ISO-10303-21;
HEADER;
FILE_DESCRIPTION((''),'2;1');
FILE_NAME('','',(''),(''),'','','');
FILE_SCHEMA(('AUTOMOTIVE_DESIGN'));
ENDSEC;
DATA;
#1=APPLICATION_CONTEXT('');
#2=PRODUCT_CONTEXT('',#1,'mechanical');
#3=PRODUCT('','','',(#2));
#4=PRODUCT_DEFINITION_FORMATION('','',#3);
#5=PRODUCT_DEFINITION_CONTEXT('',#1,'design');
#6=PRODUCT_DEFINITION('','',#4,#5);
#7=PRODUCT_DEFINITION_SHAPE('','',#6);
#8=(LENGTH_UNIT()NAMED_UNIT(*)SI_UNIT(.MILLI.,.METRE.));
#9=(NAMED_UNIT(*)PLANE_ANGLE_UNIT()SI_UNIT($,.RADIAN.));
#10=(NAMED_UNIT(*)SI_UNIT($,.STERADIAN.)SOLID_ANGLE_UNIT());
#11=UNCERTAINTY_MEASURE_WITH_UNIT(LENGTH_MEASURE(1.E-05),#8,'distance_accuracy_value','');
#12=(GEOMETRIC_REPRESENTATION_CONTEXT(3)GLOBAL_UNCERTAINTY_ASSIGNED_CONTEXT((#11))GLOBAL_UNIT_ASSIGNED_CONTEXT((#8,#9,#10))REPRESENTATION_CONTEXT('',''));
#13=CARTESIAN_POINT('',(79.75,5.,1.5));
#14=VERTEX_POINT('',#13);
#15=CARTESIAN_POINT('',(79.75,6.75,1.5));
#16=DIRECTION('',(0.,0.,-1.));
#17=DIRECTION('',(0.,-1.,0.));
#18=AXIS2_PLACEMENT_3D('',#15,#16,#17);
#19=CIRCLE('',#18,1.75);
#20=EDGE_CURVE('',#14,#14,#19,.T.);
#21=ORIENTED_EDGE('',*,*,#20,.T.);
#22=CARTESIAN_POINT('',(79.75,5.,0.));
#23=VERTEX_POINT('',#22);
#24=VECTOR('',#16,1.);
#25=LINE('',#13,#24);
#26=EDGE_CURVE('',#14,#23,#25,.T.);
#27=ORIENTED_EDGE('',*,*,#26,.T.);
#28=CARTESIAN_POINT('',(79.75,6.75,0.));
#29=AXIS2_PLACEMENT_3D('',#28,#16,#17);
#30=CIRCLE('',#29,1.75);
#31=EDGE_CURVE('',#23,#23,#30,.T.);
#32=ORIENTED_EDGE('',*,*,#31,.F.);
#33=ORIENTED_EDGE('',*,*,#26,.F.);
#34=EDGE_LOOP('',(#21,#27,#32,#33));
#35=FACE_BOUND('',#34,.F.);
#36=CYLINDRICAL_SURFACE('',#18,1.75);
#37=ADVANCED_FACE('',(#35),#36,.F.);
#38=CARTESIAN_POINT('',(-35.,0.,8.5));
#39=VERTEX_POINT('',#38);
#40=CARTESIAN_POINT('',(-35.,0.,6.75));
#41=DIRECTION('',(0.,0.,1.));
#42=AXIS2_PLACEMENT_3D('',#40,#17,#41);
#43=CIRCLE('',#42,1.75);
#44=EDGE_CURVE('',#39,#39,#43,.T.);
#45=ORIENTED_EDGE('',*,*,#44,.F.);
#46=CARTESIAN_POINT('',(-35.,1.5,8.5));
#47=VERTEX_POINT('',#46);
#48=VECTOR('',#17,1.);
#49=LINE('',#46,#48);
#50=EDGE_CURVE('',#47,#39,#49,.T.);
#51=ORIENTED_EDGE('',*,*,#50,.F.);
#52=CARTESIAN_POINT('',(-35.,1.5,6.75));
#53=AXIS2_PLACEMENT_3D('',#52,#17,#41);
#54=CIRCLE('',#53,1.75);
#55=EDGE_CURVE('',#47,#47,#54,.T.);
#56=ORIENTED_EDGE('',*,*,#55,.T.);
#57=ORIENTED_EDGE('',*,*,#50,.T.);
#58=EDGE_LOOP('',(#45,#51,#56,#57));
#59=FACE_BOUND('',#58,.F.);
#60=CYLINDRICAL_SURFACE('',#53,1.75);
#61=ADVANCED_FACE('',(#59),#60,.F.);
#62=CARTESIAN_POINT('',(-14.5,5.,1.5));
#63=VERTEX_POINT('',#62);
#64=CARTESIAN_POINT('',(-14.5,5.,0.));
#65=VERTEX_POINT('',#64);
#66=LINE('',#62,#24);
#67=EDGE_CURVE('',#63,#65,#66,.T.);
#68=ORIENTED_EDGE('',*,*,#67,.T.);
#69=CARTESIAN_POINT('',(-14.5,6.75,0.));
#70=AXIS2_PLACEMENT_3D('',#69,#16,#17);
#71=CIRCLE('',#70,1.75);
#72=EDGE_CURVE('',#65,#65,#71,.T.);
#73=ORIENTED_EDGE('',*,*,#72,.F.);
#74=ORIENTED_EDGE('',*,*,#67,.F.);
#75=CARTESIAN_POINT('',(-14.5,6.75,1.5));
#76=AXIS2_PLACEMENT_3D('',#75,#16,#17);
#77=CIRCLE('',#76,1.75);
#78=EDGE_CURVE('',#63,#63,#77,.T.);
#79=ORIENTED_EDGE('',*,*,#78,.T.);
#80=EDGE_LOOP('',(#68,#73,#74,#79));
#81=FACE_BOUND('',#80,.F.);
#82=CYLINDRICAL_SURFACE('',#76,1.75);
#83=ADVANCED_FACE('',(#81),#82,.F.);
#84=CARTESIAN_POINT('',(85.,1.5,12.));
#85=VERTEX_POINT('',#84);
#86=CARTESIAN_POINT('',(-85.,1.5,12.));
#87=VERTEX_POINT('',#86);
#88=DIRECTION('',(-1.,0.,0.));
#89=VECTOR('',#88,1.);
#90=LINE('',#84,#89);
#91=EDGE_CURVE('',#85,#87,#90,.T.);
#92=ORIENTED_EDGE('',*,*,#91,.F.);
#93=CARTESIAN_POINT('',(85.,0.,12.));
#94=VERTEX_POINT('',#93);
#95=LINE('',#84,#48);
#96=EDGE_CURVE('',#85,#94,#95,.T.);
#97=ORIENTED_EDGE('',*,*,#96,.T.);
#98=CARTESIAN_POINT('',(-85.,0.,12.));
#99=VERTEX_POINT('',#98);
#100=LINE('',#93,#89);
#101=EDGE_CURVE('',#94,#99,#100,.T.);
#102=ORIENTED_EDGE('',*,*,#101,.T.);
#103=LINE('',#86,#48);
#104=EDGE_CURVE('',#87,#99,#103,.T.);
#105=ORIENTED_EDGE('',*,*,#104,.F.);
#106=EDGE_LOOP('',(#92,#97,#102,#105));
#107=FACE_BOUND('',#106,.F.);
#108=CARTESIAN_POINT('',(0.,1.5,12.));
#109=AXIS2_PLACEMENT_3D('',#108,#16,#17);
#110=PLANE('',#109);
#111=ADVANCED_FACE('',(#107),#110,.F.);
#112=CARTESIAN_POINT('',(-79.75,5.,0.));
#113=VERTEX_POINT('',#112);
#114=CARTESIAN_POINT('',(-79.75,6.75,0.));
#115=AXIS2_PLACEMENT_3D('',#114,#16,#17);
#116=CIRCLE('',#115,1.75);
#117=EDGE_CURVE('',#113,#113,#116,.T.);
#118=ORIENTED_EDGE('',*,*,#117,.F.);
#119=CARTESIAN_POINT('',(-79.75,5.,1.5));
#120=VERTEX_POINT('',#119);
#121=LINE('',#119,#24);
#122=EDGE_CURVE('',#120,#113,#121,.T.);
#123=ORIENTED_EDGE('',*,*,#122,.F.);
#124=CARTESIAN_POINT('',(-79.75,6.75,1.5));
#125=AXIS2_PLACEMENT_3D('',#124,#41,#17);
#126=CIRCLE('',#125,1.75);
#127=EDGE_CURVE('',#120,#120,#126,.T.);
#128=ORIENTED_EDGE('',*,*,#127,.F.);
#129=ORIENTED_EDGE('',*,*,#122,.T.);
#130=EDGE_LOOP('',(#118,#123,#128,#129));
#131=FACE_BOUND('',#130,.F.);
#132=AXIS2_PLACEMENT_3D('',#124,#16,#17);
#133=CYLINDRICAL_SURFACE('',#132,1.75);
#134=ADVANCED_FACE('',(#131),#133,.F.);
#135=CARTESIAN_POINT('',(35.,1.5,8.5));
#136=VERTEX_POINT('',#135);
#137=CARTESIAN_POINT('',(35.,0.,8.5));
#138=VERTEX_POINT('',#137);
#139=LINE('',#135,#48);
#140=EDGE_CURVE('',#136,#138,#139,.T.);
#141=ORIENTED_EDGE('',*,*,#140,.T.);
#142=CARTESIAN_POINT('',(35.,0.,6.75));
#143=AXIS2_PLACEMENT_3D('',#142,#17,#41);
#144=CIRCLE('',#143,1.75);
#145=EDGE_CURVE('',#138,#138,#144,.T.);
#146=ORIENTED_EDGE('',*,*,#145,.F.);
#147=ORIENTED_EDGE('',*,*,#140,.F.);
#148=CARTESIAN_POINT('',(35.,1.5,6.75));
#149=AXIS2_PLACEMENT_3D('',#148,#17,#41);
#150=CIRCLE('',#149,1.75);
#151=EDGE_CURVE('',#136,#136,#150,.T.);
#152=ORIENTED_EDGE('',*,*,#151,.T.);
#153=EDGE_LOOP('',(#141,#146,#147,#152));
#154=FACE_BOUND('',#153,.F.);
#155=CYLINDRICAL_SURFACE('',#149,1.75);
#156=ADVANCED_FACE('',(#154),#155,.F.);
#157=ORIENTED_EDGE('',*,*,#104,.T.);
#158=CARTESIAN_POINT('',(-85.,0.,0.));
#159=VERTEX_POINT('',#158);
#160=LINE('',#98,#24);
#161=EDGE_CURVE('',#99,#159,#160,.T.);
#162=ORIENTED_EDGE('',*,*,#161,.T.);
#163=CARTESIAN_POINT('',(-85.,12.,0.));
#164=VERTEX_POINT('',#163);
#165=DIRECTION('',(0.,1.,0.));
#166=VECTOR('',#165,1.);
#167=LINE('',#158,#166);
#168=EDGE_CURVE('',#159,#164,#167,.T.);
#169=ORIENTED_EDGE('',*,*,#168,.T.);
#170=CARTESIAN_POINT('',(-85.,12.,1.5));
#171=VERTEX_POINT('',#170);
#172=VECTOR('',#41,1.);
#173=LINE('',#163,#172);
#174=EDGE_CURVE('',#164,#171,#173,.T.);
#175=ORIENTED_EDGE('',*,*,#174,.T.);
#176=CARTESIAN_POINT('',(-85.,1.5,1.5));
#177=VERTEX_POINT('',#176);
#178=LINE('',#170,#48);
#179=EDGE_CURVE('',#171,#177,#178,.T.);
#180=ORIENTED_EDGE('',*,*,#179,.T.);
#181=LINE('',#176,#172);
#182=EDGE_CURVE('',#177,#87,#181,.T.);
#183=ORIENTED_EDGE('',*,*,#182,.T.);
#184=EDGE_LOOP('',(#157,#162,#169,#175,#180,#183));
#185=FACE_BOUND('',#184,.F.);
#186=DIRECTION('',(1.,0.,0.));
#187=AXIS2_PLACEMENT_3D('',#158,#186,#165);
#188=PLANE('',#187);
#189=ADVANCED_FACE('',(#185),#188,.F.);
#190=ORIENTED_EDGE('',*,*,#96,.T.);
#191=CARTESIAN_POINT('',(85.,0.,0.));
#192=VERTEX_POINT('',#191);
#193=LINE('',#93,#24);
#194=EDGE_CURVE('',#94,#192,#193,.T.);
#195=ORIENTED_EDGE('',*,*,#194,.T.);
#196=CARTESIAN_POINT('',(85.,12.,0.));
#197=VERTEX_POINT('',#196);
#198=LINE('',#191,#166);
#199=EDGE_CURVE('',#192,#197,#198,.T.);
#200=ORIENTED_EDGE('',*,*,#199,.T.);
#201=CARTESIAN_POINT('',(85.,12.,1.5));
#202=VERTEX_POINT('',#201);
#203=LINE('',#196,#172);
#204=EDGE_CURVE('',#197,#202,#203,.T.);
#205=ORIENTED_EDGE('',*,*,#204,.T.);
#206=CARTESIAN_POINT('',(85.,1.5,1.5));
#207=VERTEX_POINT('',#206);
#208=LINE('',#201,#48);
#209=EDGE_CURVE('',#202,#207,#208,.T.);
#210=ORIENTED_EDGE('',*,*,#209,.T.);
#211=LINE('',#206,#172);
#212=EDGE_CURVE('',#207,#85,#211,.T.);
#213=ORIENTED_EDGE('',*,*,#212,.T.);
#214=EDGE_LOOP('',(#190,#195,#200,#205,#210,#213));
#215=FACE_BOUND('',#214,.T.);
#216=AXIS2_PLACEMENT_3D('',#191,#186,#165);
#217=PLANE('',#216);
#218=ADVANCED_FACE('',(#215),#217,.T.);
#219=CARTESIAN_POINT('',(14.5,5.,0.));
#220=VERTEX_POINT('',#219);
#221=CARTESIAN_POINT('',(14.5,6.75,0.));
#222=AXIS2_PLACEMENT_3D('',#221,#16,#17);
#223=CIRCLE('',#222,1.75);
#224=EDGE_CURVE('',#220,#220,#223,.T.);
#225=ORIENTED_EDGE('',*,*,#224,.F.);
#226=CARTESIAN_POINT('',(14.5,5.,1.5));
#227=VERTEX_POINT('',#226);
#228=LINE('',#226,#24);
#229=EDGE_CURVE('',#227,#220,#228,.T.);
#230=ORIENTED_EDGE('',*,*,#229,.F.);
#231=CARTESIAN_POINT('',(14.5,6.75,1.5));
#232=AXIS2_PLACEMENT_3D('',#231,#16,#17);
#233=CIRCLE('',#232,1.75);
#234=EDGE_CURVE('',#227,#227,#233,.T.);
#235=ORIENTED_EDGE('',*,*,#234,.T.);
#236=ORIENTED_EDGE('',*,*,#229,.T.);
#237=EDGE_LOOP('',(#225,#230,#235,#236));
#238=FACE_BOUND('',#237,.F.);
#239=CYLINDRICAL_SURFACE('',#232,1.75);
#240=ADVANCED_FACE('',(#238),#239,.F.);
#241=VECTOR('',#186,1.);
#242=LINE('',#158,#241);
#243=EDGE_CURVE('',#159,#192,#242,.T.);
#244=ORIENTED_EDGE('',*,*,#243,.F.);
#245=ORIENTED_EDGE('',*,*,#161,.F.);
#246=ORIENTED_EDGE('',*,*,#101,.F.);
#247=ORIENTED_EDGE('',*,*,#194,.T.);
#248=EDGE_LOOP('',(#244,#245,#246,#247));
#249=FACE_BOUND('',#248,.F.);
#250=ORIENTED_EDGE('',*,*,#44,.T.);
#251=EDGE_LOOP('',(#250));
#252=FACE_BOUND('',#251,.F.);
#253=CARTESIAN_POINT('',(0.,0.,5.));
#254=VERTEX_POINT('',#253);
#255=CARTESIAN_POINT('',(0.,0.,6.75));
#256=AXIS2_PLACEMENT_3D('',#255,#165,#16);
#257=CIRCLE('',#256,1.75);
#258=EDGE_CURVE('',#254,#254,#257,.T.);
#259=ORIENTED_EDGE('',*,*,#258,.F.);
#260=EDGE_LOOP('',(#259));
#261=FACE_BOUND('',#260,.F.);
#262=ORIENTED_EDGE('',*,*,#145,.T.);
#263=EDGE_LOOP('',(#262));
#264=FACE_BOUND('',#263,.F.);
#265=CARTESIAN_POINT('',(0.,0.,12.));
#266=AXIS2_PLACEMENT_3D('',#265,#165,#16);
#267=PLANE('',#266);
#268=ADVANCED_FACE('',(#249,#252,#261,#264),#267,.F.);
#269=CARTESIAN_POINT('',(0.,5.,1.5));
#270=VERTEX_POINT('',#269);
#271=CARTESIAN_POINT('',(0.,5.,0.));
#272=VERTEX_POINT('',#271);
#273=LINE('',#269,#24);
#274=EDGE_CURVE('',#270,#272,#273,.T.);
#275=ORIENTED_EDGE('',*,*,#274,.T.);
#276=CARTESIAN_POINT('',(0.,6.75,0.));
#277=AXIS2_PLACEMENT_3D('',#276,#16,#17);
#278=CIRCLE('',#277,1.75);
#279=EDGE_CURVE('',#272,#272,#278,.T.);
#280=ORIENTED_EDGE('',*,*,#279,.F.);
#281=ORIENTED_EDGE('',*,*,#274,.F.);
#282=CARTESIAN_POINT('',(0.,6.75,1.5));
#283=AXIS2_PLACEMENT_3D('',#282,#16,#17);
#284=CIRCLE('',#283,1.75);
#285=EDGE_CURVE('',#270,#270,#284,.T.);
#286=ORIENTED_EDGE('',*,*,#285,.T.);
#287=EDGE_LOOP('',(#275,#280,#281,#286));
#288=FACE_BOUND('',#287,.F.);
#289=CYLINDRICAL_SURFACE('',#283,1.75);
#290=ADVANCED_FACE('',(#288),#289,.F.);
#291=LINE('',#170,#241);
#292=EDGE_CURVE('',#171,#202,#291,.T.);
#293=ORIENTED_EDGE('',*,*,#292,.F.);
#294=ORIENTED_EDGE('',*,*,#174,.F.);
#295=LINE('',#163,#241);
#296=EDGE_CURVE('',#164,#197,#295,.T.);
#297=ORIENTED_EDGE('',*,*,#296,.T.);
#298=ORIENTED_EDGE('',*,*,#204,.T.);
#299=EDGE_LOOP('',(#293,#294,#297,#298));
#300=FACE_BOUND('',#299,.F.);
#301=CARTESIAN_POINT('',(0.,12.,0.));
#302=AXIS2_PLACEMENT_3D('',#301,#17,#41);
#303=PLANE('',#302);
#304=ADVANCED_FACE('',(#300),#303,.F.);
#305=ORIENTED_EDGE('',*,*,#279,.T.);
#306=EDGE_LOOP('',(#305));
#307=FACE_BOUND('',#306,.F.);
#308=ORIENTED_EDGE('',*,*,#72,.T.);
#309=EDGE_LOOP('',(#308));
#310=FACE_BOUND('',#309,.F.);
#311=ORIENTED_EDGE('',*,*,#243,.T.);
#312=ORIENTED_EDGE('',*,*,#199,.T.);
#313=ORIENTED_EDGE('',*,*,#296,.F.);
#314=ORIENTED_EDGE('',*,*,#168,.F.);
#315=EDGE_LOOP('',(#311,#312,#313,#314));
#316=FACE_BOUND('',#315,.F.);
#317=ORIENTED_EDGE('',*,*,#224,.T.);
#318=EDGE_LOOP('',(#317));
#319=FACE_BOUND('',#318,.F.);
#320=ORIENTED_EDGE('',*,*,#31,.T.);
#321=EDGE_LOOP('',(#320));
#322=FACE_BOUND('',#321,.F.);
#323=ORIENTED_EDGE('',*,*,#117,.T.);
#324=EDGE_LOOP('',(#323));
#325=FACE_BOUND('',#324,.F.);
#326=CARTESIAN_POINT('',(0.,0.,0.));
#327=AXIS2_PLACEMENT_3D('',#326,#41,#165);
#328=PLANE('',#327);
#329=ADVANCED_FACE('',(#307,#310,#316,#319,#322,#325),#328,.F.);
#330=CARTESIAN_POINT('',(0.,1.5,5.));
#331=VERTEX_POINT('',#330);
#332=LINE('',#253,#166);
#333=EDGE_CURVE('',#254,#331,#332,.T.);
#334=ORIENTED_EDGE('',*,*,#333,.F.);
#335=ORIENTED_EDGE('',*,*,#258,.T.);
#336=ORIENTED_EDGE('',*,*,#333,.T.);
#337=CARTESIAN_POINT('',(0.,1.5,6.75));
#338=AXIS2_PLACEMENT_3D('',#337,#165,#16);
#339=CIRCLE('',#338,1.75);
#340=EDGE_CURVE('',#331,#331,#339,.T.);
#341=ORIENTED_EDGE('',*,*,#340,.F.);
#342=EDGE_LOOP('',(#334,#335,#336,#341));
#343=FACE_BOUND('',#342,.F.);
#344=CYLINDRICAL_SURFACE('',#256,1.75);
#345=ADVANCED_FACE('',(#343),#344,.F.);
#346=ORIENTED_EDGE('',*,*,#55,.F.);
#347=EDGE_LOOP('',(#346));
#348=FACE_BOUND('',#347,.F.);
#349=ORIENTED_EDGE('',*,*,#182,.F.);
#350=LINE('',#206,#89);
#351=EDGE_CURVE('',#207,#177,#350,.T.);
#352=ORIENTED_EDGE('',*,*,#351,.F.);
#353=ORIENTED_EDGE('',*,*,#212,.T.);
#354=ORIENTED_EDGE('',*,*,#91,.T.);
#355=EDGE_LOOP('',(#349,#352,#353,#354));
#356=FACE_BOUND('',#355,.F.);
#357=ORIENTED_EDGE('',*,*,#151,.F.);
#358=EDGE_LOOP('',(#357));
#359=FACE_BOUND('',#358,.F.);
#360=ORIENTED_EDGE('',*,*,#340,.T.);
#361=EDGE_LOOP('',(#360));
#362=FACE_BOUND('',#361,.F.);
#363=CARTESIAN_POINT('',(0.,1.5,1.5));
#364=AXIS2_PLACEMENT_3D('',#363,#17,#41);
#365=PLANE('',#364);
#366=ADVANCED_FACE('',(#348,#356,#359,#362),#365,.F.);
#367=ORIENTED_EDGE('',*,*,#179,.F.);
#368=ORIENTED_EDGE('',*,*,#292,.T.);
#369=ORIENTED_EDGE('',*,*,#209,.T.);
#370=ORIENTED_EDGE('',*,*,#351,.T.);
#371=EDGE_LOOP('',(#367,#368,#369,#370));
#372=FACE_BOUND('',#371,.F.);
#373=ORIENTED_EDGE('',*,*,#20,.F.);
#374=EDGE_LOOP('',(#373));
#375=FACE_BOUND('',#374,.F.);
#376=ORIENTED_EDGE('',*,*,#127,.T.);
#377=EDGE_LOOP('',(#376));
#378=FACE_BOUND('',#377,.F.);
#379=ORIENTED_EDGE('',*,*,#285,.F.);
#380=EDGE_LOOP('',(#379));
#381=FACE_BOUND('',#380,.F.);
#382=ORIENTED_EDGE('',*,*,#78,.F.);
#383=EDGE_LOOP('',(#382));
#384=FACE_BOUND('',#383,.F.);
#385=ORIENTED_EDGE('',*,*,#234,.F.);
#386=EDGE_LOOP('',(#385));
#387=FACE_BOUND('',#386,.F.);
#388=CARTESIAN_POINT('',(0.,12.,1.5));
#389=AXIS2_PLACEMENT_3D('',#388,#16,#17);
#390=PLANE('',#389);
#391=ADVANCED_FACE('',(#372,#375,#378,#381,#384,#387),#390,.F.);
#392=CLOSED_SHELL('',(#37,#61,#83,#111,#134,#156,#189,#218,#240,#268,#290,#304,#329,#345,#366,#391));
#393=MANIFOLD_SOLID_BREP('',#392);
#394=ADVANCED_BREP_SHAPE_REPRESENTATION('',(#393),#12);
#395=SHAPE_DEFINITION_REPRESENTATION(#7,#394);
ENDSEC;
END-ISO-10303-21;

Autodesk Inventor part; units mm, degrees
ref_plane "YZ Plane" through (0, 0, 0) normal (1, 0, 0) x (0, 1, 0)
ref_plane "XZ Plane" through (0, 0, 0) normal (0, 1, 0) x (-1, 0, 0)
ref_plane "XY Plane" through (0, 0, 0) normal (0, 0, 1) x (1, 0, 0)
sketch "Szkic1" plane through (0, 0, 0) normal (1, 0, 0) x (0, 1, 0)
  line L0 (0, 0) -> (12, 0)
  line L1 (12, 0) -> (12, 1.5)
  line L2 (12, 1.5) -> (1.5, 1.5)
  line L3 (1.5, 1.5) -> (1.5, 12)
  line L4 (1.5, 12) -> (0, 12)
  line L5 (0, 12) -> (0, 0)
  dimension "d0" = 12
  dimension "d1" = 1.5
  dimension "d2" = 10.5
  dimension "d3" = 10.5
extrude "Wyciągnięcie proste1" add sketch "Szkic1" along normal mid plane 170
sketch "Szkic2" plane through (-85, 0, 0) normal (0, -1, 0) x (1, 0, 0)
  line L0 (0, 12) -> (170, 12) projected
  line L1 (85, 0) -> (85, 6.75) construction
  dimension "d6" = 5.25
hole "Otwór1" at (0, 0, 6.75) direction (0, 1, 0) diameter 3.5 end through all
sketch "Szkic3" plane through (-85, 1.5, 1.5) normal (0, 0, 1) x (1, 0, 0)
  line L0 (0, 10.5) -> (170, 10.5) construction
  line L1 (85, 10.5) -> (85, 5.25) construction
  point P0 (85, -1.5)
  dimension "d14" = 5.25
hole "Otwór2" at (0, 6.75, 1.5) direction (0, 0, -1) diameter 3.5 end through all
sketch "Szkic4" plane through (-85, 1.5, 1.5) normal (0, 0, 1) x (1, 0, 0)
  line L0 (170, 10.5) -> (170, 0) projected
  line L1 (0, 10.5) -> (170, 10.5) projected
  point P0 (85, -1.5)
  point P1 (164.75, 5.25)
  dimension "d22" = 5.25
  dimension "d23" = 5.25
hole "Otwór3" at (79.75, 6.75, 1.5) direction (0, 0, -1) diameter 3.5 end through all
mirror "Odbij1" about plane through (0, 0, 0) normal (1, 0, 0) of "Otwór3"
pattern_linear "Szyk prostokątny1" count 3 spacing 14.5 along (1, 0, 0) of "Otwór2" first direction both ways yes
sketch "Szkic5" plane through (-85, 1.5, 12) normal (0, 1, 0) x (1, 0, 0)
  line L0 (0, 0) -> (170, 0) construction
  circle A0 centre (85, 5.25) radius 1.75 construction
  line L1 (85, 0) -> (85, 5.25) construction
  line L2 (120, 5.25) -> (50, 5.25) construction
  point P0 (85, 12)
  dimension "d34" = 70
hole "Otwór4" at (-35, 1.5, 6.75) at (35, 1.5, 6.75) direction (0, -1, 0) diameter 3.5 end through all
properties part number "bepf_platforma_rama_bok_dlugi" material "Aluminium 6061"
